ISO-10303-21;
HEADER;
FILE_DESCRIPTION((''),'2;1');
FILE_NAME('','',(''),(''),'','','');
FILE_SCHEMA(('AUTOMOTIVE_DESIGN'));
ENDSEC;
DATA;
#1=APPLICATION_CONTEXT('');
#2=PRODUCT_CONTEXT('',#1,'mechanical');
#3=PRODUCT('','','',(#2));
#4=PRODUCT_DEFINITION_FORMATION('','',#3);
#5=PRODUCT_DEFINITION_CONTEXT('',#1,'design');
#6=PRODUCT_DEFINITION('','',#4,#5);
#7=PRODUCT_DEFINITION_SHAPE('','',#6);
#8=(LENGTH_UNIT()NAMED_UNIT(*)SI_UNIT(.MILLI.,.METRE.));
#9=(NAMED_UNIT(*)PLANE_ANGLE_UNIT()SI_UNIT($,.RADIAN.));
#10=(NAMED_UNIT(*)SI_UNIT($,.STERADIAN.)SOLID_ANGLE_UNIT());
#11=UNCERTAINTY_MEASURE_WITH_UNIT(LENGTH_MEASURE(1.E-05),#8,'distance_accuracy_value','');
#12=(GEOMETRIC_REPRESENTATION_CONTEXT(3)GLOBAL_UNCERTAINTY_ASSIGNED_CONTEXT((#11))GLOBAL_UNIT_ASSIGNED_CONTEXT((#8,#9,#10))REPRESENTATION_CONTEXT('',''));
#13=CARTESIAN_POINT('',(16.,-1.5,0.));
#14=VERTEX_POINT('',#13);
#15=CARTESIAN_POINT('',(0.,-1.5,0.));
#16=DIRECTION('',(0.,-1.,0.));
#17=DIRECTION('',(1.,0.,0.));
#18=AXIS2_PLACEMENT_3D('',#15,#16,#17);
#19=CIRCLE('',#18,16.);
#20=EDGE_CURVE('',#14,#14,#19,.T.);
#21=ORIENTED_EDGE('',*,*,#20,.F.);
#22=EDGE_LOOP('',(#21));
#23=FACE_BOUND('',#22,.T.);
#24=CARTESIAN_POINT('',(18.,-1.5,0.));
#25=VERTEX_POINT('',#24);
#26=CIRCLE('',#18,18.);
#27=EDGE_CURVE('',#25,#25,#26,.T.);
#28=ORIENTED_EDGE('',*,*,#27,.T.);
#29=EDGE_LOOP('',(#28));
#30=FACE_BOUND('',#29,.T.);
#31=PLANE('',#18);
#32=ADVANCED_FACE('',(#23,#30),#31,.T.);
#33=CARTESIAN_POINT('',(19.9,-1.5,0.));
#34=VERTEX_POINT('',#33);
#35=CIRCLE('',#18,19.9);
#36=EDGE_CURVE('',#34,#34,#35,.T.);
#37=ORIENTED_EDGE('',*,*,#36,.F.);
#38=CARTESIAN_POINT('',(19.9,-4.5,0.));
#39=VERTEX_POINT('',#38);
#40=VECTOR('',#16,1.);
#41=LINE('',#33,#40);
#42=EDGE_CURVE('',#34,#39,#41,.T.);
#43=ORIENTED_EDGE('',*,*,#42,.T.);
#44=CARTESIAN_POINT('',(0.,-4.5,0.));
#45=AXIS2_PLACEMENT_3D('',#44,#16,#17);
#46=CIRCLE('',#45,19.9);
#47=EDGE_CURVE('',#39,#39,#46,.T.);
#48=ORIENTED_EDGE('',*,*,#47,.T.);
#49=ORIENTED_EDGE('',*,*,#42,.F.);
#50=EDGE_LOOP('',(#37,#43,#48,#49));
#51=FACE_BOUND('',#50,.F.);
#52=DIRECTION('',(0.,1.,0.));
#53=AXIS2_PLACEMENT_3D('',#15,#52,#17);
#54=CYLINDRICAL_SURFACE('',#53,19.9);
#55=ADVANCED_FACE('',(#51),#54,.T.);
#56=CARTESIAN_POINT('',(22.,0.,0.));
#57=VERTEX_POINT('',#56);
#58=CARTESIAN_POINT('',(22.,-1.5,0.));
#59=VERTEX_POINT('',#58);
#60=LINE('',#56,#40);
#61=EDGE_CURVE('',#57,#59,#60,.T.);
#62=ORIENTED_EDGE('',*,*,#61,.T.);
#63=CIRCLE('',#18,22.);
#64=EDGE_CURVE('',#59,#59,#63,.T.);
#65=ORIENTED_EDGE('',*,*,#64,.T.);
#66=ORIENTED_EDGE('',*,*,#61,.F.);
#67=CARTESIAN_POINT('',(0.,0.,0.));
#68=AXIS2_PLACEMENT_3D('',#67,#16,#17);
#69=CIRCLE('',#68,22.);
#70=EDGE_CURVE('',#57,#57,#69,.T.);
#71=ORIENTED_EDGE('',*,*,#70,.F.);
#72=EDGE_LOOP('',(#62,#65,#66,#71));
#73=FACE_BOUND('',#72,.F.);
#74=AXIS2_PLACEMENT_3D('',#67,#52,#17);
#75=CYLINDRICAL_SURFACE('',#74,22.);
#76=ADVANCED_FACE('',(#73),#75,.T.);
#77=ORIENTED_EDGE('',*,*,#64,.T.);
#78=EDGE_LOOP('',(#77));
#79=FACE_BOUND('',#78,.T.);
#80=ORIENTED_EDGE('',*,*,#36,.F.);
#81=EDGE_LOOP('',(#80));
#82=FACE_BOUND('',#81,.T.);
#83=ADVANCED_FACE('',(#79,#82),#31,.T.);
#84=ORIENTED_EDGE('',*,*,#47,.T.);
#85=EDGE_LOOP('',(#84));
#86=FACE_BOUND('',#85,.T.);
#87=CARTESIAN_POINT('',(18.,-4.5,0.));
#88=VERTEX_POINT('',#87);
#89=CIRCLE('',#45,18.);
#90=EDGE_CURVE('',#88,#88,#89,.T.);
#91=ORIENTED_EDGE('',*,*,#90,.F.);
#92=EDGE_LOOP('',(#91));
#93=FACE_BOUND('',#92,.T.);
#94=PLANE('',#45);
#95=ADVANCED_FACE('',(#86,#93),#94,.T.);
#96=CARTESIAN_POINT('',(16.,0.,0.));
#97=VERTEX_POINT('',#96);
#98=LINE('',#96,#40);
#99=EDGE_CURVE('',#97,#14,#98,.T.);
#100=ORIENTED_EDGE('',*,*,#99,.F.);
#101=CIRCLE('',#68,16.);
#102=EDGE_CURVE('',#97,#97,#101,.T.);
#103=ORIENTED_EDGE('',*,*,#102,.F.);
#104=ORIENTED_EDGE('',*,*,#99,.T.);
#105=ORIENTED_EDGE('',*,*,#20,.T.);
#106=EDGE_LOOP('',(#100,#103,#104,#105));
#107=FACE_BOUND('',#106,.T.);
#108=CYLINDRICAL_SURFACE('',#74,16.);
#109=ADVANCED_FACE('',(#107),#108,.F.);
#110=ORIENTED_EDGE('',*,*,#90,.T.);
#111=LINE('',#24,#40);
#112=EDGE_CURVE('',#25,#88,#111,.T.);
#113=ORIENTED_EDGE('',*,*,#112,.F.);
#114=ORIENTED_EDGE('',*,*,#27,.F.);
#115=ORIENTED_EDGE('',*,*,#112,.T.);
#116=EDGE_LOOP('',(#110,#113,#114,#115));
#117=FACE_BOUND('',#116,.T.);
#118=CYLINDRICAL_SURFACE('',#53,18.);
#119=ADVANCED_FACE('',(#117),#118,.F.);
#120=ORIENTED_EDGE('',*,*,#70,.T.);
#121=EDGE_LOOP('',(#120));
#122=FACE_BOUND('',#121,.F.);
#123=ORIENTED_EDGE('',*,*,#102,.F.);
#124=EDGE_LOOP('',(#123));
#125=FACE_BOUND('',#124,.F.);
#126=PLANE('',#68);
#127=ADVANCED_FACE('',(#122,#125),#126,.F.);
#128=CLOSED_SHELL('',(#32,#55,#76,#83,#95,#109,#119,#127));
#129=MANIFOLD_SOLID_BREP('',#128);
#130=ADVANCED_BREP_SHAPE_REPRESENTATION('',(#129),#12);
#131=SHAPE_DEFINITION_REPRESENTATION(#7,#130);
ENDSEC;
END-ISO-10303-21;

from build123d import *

# Parameters (mm, degrees)
F0_R     = 22
F0_R_2   = 16
F1_DEPTH = 1.5
F2_R     = 19.9
F2_R_2   = 18
F3_DEPTH = 3


# Not quite as in the source:
# - a feature names something its author has since deleted; it is built from what else it names


with BuildPart() as f1:
    # F0 (on Front) → F1 (new body)
    with BuildSketch(Plane.XZ):
        Circle(F0_R)
        Circle(F0_R_2, mode=Mode.SUBTRACT)
    extrude(amount=F1_DEPTH)

    # F2 (on face) → F3 (join)
    with BuildSketch(Plane.XZ.offset(1.5)):
        Circle(F2_R)
        Circle(F2_R_2, mode=Mode.SUBTRACT)
    extrude(amount=F3_DEPTH)


solid = f1.part
